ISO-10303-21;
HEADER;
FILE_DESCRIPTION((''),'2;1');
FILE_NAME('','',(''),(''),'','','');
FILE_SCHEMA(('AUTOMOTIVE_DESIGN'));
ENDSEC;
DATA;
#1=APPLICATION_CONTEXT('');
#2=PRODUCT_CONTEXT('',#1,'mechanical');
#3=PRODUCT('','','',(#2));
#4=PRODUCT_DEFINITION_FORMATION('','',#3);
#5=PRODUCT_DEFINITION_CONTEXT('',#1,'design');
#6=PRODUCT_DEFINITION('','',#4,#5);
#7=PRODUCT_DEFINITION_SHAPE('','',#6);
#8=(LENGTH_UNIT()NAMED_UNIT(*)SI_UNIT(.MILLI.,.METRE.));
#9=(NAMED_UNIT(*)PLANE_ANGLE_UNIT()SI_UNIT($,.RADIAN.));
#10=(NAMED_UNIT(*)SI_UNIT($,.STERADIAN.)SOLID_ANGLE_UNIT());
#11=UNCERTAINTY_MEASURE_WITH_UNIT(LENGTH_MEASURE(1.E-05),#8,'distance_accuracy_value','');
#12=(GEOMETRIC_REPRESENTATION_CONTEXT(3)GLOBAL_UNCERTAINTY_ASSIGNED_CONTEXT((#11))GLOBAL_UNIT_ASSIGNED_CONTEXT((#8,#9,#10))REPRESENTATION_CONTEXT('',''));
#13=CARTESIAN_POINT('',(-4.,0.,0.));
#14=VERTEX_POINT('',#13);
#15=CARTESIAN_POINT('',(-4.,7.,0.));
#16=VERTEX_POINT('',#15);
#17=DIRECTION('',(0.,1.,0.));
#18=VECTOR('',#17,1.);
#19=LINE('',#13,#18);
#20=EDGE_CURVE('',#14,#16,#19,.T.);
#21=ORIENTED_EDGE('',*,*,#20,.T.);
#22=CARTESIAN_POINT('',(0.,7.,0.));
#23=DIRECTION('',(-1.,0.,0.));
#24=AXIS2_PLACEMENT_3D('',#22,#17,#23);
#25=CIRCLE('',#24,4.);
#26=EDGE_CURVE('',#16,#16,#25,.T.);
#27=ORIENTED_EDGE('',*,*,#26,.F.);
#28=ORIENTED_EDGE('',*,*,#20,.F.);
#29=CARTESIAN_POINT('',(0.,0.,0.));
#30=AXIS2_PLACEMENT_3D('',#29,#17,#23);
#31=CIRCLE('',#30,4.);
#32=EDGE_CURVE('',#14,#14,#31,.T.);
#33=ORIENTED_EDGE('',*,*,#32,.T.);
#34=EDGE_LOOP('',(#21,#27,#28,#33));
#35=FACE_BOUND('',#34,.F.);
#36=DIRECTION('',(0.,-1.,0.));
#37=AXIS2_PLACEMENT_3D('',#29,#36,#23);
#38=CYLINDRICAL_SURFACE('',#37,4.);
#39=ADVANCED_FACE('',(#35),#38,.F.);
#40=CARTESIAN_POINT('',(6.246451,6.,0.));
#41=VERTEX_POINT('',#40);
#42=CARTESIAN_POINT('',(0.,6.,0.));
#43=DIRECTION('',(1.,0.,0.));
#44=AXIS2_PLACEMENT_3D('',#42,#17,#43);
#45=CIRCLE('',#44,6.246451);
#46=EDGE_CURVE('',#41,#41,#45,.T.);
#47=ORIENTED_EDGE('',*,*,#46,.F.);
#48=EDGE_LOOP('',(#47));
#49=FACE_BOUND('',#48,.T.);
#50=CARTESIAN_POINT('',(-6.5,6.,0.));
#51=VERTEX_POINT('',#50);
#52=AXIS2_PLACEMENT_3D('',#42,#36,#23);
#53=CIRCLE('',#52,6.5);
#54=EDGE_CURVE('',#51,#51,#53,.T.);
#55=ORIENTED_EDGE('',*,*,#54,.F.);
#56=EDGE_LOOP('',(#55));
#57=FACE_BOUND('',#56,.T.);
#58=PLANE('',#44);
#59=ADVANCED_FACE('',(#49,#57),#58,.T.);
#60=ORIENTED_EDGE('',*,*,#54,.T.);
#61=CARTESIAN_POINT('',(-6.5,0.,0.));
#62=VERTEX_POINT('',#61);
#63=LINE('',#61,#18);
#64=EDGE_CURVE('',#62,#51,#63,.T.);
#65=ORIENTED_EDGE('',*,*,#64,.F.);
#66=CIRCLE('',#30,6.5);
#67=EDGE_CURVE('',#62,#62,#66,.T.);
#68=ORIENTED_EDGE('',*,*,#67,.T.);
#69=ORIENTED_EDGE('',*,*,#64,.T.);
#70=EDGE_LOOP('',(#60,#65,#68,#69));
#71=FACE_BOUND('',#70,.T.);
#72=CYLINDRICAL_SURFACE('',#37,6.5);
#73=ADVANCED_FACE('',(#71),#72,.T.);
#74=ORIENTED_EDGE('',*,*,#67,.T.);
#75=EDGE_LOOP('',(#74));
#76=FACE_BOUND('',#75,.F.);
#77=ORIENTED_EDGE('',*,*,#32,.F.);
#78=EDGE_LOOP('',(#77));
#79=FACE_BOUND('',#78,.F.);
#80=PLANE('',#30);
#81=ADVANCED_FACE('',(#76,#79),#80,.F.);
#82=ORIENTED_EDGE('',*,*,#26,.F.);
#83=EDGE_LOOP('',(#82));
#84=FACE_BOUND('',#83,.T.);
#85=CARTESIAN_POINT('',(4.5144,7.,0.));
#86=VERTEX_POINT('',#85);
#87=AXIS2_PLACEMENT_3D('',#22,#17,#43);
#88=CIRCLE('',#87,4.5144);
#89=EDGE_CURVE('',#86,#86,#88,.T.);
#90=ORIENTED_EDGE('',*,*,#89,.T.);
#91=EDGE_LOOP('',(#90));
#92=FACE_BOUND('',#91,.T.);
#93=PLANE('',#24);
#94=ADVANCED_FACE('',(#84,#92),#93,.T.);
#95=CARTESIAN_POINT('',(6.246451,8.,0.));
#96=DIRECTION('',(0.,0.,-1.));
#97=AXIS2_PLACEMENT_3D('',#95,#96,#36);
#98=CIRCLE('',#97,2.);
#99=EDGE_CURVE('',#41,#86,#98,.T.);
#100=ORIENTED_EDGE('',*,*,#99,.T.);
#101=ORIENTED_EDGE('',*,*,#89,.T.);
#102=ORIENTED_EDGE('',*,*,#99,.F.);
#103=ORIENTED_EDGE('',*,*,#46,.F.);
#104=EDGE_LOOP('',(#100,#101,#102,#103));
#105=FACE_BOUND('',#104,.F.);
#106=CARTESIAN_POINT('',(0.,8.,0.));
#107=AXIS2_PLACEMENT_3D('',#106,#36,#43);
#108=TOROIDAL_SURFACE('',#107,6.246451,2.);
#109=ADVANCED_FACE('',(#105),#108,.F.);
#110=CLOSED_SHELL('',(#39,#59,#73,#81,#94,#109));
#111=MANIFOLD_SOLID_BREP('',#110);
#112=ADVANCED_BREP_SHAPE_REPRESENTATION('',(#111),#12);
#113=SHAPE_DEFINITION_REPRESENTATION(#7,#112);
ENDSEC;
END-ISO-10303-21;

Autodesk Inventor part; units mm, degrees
ref_plane "YZ Plane" through (0, 0, 0) normal (1, 0, 0) x (0, 1, 0)
ref_plane "XZ Plane" through (0, 0, 0) normal (0, 1, 0) x (-1, 0, 0)
ref_plane "XY Plane" through (0, 0, 0) normal (0, 0, 1) x (1, 0, 0)
sketch "Sketch1" plane through (0, 0, 0) normal (0, 1, 0) x (-1, 0, 0)
  circle A0 centre (0, 0) radius 6.5
  circle A1 centre (0, 0) radius 4
  dimension "d0" = 13
  dimension "d1" = 8
extrude "Extrusion1" add sketch "Sketch1" along normal blind 7
sketch "Sketch2" plane through (0, 7, 0) normal (0, 1, 0) x (1, 0, 0)
  circle A0 centre (0, 0) radius 4.5144
  circle A1 centre (0, 0) radius 7.9884
extrude "Extrusion2" cut sketch "Sketch2" against normal blind 1
fillet "Fillet1" radius 2 1 edges at (-4.5144, 6, 0)
properties part number "ulozak prednji" material "Acetal Resin, Black"
